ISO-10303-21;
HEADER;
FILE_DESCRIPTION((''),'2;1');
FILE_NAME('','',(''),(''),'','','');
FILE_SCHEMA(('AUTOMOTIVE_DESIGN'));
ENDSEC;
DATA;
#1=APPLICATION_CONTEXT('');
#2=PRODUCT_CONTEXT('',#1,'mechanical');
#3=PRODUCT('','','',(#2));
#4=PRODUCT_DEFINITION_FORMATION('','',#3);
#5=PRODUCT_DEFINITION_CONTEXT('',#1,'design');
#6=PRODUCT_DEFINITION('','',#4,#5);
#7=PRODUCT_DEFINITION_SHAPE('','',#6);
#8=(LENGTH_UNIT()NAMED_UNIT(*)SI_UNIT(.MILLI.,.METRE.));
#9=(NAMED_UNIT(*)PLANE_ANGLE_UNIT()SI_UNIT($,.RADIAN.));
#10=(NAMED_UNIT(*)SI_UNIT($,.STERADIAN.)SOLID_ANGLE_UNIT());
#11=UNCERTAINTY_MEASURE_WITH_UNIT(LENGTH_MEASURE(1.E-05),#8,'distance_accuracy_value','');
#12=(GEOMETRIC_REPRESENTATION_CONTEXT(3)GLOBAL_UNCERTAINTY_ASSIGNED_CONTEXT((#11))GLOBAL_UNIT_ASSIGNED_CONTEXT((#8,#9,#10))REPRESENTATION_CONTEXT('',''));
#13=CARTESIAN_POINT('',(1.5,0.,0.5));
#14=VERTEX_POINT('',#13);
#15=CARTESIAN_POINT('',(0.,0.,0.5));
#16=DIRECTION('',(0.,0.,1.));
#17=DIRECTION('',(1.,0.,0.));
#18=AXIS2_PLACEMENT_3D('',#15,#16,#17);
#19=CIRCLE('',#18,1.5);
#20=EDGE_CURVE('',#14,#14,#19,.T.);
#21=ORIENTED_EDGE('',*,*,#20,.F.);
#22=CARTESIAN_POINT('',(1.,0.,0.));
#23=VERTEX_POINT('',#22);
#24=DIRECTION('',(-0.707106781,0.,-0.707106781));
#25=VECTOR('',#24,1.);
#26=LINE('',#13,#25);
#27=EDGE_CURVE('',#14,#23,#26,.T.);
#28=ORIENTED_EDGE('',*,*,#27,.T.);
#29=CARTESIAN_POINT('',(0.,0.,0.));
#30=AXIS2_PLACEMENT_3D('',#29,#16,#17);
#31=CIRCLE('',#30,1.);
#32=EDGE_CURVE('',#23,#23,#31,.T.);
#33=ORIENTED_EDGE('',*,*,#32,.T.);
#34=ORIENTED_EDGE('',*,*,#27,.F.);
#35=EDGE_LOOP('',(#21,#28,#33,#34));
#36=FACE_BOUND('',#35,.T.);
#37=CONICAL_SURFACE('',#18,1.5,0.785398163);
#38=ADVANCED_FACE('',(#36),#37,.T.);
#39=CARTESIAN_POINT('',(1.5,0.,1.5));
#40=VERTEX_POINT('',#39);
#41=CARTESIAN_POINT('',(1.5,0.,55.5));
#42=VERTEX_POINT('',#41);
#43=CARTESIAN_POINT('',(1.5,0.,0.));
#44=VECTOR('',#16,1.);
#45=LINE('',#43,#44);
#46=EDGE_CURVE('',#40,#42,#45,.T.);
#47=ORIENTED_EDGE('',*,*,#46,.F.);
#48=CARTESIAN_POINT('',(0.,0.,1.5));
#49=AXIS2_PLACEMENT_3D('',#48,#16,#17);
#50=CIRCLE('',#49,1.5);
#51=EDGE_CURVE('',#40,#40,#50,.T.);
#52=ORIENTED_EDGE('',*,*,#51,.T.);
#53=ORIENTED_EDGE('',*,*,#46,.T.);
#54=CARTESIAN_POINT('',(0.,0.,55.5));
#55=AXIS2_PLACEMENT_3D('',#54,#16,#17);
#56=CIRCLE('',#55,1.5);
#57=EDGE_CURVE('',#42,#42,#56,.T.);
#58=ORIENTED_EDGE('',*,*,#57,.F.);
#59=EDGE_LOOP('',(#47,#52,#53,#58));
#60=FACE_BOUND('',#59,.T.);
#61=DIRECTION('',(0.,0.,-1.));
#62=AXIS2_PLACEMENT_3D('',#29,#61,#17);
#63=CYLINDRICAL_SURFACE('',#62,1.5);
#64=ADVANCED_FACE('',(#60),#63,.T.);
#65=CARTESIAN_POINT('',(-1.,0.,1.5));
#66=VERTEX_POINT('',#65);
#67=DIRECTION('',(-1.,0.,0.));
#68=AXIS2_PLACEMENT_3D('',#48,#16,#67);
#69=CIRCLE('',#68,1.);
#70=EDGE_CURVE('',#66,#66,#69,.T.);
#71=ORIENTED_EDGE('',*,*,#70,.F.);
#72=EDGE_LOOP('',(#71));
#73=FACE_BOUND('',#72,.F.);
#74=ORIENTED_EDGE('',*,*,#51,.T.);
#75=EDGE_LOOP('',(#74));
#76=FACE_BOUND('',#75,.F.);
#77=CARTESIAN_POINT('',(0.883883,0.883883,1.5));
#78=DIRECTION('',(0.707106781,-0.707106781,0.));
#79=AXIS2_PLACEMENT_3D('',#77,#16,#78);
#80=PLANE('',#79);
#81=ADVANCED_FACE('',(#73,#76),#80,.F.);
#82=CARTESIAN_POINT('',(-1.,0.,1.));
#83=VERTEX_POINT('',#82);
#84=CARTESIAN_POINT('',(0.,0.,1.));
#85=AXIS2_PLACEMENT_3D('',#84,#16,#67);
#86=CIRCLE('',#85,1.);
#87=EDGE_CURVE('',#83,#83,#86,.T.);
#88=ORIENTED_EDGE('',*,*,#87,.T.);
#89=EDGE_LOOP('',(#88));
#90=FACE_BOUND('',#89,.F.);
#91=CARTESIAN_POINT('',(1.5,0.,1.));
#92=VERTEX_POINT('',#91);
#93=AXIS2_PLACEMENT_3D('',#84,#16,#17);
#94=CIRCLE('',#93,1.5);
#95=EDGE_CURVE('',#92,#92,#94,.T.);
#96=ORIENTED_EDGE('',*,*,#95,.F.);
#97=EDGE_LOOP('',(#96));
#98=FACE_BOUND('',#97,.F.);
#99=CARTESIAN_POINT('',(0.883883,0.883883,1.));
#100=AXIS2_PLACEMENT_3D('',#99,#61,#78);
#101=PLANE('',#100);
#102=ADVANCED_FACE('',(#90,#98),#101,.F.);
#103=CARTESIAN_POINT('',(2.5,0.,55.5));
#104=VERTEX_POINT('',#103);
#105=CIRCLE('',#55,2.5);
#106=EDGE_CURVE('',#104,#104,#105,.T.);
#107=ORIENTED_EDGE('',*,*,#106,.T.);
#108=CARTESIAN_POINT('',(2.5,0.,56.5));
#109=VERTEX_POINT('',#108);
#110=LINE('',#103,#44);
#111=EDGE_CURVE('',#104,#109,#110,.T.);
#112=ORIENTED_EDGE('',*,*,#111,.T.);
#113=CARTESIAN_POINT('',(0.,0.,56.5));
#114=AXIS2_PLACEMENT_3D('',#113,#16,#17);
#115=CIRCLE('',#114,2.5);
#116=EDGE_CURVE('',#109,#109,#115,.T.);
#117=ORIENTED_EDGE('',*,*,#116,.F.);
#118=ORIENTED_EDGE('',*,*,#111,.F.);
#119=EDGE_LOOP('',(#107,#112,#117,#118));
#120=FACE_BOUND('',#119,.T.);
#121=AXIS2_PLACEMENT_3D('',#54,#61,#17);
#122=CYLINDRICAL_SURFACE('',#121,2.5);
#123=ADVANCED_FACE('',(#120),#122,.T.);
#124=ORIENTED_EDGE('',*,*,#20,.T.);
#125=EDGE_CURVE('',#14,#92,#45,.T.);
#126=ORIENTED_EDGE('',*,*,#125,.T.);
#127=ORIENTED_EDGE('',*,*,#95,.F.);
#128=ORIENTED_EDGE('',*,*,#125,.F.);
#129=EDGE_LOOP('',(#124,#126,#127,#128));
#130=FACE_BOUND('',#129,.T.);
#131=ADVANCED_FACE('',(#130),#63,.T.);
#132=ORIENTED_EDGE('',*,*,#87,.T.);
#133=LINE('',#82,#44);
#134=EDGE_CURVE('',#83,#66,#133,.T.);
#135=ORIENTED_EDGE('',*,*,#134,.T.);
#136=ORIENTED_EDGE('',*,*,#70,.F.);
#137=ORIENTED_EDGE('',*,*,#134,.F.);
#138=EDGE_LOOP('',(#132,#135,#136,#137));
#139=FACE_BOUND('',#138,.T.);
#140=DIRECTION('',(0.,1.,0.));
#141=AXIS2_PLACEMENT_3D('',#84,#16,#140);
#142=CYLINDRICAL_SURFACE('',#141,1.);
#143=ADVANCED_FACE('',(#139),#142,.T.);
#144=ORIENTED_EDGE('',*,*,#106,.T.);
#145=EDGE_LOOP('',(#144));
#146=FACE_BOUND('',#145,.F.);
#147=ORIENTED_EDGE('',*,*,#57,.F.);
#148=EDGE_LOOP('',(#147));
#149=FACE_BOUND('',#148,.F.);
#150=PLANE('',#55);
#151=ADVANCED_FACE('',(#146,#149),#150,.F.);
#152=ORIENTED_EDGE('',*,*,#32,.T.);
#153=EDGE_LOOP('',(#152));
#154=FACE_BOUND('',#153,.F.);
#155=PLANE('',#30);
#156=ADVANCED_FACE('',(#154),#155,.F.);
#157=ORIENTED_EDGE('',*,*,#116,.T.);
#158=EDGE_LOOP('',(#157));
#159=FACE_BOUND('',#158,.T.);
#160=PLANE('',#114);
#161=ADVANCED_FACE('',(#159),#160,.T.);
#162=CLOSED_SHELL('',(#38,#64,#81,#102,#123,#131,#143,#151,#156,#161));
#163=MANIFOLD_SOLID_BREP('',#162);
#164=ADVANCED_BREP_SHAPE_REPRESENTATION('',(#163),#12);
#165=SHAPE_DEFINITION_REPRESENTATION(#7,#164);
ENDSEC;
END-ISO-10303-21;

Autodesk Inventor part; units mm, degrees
ref_plane "YZ Plane" through (0, 0, 0) normal (1, 0, 0) x (0, 1, 0)
ref_plane "XZ Plane" through (0, 0, 0) normal (0, 1, 0) x (-1, 0, 0)
ref_plane "XY Plane" through (0, 0, 0) normal (0, 0, 1) x (1, 0, 0)
sketch "Náčrt1" plane through (0, 0, 0) normal (0, 0, 1) x (1, 0, 0)
  circle A0 centre (0, 0) radius 1.5
  dimension "d0" = 3
extrude "Vysunutí1" add sketch "Náčrt1" along normal blind 55.5
sketch "Náčrt2" plane through (0, 0, 55.5) normal (0, 0, 1) x (1, 0, 0)
  circle A0 centre (0, 0) radius 2.5
  dimension "d3" = 5
extrude "Vysunutí2" add sketch "Náčrt2" along normal blind 1
sketch "Náčrt3" plane through (0, 0, 0) normal (0, 1, 0) x (-1, 0, 0)
  line L0 (-1.5, 0) -> (1.5, 0) projected
  line L1 (-1.5, 1) -> (-1, 1)
  line L2 (-1, 1) -> (-1, 1.5)
  line L3 (-1, 1.5) -> (-1.5, 1.5)
  line L4 (-1.5, 1.5) -> (-1.5, 1)
  point P0 (0, 0)
  dimension "d8" = 0.5
  dimension "d9" = 0.5
  dimension "d10" = 0.5
sketch3d "3D náčrt1"
  arc A0 (1.5, 0, 0) -> (0, -1.5, 0) centre (0, 0, 0) ccw
  arc A1 (0, -1.5, 0) -> (-1.5, 0, 0) centre (0, 0, 0) ccw
  arc A2 (-1.5, 0, 0) -> (0, 1.5, 0) centre (0, 0, 0) ccw
  arc A3 (0, 1.5, 0) -> (1.5, 0, 0) centre (0, 0, 0) ccw
sweep "Tažení1" cut profiles "Náčrt3" path "3D náčrt1"
chamfer "Zkosení1" distance 0.5 angle 45 1 edges at (-1.5, 0, 0)
properties part number "naprava"
